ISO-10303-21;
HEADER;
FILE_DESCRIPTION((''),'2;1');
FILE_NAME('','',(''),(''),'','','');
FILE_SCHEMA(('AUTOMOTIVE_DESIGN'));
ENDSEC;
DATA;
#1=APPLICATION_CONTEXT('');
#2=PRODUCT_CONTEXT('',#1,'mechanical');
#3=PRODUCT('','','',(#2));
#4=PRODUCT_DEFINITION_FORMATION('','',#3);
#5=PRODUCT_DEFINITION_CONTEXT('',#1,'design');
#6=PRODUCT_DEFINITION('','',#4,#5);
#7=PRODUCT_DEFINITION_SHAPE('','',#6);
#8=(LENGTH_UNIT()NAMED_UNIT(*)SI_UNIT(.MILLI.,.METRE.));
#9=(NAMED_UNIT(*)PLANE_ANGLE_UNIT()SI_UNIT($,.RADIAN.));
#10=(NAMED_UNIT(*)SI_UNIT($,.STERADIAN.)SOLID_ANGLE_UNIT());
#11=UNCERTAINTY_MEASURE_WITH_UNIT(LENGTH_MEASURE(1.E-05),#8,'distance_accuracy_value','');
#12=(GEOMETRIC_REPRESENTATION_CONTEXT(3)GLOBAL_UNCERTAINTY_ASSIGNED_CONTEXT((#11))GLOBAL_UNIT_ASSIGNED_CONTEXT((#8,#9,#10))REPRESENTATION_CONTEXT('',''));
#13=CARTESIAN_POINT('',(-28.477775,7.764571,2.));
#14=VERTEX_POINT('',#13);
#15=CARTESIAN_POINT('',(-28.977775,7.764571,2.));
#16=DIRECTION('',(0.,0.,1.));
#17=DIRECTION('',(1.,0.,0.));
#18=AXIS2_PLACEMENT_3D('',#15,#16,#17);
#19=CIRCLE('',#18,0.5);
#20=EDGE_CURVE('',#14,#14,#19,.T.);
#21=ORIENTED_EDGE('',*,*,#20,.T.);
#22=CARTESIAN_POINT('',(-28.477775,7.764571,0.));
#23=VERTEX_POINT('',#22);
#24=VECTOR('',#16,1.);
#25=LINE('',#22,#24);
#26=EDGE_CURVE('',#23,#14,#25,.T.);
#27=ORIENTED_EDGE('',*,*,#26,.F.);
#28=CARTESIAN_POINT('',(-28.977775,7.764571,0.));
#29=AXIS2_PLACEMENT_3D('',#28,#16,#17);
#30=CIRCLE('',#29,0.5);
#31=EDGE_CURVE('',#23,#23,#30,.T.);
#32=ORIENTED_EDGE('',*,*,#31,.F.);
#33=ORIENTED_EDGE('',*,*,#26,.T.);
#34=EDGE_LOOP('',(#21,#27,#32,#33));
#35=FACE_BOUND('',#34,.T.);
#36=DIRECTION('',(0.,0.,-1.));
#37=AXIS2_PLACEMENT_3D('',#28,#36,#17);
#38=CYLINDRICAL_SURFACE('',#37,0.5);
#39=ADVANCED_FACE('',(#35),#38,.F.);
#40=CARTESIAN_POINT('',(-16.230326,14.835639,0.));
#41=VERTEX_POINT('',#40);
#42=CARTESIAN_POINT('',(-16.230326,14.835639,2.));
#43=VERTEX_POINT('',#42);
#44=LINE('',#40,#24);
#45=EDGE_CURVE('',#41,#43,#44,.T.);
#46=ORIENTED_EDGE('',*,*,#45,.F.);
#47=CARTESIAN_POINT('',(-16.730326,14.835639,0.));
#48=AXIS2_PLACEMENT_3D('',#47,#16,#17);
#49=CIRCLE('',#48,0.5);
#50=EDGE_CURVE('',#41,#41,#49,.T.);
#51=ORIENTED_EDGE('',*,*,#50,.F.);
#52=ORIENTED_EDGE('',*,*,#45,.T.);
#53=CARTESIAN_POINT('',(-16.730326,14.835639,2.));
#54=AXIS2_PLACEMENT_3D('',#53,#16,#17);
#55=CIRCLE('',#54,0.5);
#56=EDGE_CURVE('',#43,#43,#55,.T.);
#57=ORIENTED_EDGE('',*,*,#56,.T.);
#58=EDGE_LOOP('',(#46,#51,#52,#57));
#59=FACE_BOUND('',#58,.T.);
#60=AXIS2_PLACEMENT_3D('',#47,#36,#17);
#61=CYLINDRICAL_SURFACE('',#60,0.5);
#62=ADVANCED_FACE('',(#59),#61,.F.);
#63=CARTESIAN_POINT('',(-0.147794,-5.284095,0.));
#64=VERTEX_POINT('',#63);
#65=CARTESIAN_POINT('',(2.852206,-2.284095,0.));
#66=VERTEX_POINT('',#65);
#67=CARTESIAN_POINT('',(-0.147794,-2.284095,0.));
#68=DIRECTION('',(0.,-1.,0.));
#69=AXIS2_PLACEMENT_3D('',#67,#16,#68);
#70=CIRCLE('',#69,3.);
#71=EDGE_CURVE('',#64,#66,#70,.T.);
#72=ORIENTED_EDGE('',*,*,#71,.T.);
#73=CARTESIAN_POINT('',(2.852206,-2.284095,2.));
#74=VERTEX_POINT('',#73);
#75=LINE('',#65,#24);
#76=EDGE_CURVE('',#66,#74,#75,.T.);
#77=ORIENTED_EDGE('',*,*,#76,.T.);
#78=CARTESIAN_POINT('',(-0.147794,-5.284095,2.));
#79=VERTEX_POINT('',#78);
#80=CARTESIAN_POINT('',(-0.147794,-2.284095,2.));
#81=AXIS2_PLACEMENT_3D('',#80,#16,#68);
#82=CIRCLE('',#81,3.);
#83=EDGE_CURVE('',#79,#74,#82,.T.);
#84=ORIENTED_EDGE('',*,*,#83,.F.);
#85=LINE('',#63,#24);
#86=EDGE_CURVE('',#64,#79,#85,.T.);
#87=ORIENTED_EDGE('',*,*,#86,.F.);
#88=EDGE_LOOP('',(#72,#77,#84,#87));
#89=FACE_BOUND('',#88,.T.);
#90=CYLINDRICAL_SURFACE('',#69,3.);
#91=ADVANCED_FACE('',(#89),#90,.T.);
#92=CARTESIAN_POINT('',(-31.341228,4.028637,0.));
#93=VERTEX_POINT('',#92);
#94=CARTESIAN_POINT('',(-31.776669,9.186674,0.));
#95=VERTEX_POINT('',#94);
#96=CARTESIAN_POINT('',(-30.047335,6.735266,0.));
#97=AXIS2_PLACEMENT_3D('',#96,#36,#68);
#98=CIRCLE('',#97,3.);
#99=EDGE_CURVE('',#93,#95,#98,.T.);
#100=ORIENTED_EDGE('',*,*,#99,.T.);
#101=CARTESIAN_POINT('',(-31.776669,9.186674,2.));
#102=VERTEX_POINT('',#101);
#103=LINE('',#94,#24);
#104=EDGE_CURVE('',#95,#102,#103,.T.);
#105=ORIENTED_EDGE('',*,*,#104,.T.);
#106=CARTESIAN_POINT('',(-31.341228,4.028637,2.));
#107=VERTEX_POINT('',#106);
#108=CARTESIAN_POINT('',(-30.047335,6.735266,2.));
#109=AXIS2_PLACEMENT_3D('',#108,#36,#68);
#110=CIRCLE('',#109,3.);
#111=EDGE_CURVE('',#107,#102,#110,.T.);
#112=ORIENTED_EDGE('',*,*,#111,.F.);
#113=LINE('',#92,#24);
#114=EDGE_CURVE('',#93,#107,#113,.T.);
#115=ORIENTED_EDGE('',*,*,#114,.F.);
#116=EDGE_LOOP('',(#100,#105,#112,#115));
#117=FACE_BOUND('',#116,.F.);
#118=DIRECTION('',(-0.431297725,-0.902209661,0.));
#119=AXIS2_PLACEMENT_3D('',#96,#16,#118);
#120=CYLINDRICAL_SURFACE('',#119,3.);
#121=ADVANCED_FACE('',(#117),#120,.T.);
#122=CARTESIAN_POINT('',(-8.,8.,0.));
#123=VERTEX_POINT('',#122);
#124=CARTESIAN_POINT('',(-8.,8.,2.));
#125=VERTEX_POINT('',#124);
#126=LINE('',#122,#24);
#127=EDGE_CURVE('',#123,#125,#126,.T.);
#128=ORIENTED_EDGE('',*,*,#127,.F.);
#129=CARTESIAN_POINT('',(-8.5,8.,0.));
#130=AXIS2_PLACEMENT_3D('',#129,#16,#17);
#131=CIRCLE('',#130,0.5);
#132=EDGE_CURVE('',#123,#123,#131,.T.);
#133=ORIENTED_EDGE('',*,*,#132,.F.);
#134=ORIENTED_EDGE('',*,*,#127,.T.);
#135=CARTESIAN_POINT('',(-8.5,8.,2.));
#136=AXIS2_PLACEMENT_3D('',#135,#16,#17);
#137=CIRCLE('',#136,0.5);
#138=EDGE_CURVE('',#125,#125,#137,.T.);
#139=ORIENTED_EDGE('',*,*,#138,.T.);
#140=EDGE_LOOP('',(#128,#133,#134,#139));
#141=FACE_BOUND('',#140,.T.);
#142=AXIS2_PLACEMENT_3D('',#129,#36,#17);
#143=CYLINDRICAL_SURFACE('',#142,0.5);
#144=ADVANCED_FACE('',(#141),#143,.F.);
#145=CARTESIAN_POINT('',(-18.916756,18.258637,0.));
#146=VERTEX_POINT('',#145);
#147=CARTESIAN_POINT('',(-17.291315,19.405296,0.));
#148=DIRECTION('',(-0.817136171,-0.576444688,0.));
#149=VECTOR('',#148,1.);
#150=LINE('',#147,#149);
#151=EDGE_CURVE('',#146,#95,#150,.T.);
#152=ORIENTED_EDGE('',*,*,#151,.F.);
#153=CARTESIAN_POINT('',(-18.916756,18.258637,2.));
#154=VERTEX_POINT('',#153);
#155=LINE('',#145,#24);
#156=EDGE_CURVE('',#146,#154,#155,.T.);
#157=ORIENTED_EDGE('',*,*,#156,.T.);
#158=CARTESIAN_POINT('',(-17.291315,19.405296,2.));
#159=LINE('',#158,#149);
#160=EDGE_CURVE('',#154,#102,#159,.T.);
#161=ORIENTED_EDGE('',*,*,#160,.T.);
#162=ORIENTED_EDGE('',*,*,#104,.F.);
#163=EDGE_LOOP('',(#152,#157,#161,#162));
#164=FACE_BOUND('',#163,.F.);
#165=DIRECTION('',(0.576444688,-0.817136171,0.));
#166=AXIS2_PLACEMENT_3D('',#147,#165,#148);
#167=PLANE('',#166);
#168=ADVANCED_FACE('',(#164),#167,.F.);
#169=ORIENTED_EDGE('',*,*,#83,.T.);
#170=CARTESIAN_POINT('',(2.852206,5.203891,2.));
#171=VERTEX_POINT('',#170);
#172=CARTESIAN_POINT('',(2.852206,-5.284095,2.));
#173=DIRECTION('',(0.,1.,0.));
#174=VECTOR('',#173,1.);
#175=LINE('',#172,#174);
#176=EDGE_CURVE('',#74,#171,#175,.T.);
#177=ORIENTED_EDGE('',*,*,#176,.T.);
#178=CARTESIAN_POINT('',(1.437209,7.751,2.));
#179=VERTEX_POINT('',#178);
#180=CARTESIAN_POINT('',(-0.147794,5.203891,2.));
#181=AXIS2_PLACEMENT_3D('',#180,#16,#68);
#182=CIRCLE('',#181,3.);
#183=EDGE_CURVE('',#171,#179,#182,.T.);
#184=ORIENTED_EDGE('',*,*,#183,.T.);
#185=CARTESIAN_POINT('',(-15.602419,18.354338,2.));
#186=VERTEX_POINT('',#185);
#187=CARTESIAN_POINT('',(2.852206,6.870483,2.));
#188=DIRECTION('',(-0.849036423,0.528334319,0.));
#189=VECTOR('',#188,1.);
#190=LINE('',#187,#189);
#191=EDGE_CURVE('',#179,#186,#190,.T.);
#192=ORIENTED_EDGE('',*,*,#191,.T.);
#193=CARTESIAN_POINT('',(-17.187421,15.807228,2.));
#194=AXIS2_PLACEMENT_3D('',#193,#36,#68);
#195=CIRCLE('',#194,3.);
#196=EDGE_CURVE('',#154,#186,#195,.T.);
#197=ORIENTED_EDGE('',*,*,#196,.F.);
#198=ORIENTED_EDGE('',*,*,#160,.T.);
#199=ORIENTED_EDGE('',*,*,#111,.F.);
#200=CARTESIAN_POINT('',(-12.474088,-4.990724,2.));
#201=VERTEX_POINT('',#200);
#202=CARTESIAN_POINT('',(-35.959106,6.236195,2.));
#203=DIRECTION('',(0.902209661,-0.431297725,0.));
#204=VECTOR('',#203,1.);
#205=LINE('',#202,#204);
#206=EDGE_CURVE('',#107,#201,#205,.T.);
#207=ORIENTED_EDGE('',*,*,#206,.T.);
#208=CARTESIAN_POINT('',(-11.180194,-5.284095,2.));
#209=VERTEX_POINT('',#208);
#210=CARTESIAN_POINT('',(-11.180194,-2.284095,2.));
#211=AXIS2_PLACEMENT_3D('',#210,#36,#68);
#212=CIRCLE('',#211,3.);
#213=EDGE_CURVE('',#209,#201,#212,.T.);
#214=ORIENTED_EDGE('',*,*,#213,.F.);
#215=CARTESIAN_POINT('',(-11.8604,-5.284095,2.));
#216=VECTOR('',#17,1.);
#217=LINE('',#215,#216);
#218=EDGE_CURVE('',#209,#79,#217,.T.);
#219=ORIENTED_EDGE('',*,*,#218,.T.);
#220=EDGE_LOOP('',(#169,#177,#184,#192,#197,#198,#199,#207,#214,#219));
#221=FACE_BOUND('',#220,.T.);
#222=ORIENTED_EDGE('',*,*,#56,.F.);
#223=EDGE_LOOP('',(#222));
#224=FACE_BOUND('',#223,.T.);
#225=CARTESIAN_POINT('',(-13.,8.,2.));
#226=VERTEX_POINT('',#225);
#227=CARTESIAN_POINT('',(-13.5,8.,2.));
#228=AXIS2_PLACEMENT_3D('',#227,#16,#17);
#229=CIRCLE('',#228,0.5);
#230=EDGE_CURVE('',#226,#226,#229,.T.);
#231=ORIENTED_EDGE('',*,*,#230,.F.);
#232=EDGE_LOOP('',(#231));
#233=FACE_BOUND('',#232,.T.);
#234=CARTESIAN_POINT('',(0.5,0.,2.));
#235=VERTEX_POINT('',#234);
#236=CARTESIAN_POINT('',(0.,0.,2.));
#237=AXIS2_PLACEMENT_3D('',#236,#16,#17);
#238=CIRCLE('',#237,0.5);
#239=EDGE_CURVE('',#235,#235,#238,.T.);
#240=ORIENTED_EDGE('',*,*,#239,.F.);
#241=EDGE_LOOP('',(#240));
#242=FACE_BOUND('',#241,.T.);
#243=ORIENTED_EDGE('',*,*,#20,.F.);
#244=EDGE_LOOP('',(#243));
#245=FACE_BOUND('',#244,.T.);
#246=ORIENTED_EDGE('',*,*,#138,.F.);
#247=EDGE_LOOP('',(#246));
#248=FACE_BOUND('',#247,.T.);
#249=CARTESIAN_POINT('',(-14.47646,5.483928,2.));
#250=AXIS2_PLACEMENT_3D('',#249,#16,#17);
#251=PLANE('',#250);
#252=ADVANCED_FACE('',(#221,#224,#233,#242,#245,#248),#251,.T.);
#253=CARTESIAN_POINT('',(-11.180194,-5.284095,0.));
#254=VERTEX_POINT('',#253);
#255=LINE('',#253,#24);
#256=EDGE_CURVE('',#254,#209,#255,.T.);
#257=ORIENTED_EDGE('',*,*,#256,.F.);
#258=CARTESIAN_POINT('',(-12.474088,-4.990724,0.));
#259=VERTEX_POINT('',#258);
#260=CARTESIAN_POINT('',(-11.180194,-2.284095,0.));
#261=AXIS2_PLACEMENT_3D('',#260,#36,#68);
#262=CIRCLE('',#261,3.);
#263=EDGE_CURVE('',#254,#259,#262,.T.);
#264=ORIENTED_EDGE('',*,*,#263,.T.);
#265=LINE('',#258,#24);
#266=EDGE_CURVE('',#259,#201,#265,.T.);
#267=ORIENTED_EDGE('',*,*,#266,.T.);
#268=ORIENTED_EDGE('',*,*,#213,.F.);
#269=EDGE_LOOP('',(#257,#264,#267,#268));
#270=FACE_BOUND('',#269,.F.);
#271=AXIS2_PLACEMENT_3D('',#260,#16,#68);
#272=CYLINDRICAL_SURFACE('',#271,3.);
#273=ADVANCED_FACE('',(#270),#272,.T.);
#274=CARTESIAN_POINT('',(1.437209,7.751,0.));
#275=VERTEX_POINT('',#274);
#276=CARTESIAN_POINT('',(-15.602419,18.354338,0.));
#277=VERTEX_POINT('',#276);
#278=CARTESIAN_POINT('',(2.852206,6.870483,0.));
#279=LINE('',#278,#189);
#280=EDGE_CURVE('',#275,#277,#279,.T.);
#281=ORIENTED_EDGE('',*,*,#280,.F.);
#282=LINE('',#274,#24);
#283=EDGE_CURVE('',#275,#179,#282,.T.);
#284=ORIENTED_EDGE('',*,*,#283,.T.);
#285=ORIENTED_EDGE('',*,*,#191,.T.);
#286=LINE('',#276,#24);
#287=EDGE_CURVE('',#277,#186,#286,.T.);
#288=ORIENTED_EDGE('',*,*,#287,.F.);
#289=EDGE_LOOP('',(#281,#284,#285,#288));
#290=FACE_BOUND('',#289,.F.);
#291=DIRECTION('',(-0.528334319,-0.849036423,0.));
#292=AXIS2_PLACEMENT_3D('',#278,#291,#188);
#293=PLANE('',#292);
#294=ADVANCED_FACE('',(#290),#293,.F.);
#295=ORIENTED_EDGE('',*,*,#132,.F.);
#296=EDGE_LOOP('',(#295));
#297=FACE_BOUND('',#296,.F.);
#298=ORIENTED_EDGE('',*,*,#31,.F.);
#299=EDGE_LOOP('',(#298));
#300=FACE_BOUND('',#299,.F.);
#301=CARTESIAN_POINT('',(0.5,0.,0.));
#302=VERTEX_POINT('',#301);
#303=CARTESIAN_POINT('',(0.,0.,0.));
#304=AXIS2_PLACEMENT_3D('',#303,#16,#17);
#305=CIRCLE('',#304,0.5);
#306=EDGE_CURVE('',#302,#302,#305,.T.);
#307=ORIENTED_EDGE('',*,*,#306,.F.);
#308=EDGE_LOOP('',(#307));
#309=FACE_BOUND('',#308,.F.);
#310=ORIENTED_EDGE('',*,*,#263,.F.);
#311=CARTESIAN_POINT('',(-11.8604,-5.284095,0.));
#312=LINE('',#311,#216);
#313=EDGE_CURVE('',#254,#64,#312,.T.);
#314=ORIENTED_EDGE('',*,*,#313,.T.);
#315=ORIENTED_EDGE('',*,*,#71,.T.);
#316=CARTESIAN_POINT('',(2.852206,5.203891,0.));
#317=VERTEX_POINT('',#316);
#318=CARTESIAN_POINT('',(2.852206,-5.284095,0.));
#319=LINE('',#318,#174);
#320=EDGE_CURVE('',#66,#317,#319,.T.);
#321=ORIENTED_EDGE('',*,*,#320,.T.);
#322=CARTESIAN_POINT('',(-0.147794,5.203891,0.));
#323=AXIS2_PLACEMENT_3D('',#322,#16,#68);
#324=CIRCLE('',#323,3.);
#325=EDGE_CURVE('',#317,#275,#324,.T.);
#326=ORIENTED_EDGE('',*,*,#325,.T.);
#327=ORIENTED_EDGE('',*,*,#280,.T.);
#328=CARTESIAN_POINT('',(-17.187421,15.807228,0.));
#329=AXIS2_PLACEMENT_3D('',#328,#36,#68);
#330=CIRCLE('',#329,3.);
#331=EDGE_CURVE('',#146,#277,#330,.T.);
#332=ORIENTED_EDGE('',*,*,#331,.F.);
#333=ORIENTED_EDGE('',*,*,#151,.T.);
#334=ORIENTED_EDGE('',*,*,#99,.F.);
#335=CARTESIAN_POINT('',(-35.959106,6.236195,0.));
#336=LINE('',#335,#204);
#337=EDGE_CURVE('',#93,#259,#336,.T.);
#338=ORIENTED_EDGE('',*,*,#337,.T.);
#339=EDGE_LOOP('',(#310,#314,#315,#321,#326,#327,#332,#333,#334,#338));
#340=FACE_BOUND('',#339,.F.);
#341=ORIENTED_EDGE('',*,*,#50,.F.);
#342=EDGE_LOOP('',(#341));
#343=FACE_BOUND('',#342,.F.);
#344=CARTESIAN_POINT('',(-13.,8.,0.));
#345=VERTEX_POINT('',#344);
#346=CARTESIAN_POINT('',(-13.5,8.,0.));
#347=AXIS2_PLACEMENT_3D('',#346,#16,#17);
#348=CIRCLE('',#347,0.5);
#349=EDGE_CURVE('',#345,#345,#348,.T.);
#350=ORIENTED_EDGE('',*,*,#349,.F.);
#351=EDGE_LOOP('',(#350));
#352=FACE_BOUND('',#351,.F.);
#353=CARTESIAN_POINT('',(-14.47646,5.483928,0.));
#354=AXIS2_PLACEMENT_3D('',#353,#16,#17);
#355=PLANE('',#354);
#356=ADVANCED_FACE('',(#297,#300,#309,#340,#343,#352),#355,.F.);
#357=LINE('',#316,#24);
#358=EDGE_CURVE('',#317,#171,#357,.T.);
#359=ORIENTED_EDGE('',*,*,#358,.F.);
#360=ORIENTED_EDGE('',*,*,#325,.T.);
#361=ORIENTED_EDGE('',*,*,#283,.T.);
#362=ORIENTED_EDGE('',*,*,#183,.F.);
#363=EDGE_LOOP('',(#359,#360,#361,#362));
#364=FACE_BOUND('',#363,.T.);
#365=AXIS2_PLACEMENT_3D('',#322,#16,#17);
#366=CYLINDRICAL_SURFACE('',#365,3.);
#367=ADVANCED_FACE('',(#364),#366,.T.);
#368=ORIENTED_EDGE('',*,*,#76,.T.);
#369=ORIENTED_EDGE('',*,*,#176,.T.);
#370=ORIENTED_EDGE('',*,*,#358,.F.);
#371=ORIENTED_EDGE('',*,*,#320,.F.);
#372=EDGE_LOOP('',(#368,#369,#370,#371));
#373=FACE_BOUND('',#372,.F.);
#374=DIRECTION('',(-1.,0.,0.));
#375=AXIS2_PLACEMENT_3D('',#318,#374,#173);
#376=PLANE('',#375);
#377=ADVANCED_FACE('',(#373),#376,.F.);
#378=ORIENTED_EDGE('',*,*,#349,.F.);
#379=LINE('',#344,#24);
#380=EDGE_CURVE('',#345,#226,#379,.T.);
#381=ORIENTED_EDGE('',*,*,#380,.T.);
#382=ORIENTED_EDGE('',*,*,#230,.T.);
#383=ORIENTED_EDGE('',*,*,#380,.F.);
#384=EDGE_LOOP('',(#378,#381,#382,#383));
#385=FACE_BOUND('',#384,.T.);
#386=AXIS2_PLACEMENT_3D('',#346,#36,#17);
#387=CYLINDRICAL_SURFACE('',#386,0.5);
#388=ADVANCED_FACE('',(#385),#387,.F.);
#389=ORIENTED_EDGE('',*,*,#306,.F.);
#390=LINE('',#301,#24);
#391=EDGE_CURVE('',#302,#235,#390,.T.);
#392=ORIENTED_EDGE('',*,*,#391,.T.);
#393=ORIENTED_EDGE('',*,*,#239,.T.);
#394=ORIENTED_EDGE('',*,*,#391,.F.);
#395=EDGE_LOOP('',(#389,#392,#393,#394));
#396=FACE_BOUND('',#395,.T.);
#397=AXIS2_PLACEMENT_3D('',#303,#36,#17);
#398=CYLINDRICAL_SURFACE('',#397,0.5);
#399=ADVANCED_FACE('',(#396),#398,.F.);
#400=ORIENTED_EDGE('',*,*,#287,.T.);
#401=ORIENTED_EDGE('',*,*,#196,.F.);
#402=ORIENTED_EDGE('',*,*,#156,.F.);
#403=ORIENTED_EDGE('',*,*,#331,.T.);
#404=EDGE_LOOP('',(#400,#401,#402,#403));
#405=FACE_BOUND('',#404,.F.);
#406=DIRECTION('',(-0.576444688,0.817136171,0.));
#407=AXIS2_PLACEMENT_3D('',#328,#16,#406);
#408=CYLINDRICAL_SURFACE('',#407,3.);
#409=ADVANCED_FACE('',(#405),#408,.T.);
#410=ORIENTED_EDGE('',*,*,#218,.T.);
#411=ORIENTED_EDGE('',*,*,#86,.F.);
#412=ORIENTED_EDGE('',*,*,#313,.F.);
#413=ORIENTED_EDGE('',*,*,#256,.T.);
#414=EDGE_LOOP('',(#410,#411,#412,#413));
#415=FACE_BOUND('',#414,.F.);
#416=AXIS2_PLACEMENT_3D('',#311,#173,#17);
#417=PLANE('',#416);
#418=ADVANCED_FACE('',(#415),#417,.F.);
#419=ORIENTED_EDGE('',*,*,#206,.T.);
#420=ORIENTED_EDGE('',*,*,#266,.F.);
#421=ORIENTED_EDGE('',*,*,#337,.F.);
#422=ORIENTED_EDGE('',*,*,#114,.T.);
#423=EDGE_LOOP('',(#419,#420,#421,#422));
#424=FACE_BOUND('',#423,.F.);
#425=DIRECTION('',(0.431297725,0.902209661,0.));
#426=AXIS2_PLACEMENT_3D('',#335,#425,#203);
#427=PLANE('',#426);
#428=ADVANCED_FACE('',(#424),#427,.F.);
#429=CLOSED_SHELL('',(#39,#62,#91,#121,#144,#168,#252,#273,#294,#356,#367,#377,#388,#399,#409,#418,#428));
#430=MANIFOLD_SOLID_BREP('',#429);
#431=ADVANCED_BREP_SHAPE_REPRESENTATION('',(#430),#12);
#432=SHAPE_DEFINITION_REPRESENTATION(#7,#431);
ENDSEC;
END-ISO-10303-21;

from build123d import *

# Parameters (mm, degrees)
F0_R     = 0.5
F1_DEPTH = 2
F2_R     = 3


with BuildPart() as f1:
    # F0 (on Top) → F1 (new body)
    with BuildSketch(Plane.XY):
        Polygon((-11.8603997611, -5.284095183), (2.8522056527, -5.284095183), (2.8522056527, 6.8704825826), (-17.2913148999, 19.4052960724), (-35.9591057258, 6.2361949424), align=None)
        Circle(F0_R, mode=Mode.SUBTRACT)
        with Locations((-28.9777747887, 7.7645713531)):
            Circle(F0_R, mode=Mode.SUBTRACT)
        with Locations((-16.7303260748, 14.8356391649)):
            Circle(F0_R, mode=Mode.SUBTRACT)
        with Locations((-13.5, 8)):
            Circle(F0_R, mode=Mode.SUBTRACT)
        with Locations((-8.5, 8)):
            Circle(F0_R, mode=Mode.SUBTRACT)
    extrude(amount=F1_DEPTH)

    # F2
    f2_edges = [f1.edges().sort_by_distance(p)[0] for p in [
        (-17.291315, 19.405296, 1),
        (2.852206, -5.284095, 1),
        (2.852206, 6.870483, 1),
        (-35.959106, 6.236195, 1),
        (-11.8604, -5.284095, 1),
    ]]
    fillet(f2_edges, radius=F2_R)


solid = f1.part
